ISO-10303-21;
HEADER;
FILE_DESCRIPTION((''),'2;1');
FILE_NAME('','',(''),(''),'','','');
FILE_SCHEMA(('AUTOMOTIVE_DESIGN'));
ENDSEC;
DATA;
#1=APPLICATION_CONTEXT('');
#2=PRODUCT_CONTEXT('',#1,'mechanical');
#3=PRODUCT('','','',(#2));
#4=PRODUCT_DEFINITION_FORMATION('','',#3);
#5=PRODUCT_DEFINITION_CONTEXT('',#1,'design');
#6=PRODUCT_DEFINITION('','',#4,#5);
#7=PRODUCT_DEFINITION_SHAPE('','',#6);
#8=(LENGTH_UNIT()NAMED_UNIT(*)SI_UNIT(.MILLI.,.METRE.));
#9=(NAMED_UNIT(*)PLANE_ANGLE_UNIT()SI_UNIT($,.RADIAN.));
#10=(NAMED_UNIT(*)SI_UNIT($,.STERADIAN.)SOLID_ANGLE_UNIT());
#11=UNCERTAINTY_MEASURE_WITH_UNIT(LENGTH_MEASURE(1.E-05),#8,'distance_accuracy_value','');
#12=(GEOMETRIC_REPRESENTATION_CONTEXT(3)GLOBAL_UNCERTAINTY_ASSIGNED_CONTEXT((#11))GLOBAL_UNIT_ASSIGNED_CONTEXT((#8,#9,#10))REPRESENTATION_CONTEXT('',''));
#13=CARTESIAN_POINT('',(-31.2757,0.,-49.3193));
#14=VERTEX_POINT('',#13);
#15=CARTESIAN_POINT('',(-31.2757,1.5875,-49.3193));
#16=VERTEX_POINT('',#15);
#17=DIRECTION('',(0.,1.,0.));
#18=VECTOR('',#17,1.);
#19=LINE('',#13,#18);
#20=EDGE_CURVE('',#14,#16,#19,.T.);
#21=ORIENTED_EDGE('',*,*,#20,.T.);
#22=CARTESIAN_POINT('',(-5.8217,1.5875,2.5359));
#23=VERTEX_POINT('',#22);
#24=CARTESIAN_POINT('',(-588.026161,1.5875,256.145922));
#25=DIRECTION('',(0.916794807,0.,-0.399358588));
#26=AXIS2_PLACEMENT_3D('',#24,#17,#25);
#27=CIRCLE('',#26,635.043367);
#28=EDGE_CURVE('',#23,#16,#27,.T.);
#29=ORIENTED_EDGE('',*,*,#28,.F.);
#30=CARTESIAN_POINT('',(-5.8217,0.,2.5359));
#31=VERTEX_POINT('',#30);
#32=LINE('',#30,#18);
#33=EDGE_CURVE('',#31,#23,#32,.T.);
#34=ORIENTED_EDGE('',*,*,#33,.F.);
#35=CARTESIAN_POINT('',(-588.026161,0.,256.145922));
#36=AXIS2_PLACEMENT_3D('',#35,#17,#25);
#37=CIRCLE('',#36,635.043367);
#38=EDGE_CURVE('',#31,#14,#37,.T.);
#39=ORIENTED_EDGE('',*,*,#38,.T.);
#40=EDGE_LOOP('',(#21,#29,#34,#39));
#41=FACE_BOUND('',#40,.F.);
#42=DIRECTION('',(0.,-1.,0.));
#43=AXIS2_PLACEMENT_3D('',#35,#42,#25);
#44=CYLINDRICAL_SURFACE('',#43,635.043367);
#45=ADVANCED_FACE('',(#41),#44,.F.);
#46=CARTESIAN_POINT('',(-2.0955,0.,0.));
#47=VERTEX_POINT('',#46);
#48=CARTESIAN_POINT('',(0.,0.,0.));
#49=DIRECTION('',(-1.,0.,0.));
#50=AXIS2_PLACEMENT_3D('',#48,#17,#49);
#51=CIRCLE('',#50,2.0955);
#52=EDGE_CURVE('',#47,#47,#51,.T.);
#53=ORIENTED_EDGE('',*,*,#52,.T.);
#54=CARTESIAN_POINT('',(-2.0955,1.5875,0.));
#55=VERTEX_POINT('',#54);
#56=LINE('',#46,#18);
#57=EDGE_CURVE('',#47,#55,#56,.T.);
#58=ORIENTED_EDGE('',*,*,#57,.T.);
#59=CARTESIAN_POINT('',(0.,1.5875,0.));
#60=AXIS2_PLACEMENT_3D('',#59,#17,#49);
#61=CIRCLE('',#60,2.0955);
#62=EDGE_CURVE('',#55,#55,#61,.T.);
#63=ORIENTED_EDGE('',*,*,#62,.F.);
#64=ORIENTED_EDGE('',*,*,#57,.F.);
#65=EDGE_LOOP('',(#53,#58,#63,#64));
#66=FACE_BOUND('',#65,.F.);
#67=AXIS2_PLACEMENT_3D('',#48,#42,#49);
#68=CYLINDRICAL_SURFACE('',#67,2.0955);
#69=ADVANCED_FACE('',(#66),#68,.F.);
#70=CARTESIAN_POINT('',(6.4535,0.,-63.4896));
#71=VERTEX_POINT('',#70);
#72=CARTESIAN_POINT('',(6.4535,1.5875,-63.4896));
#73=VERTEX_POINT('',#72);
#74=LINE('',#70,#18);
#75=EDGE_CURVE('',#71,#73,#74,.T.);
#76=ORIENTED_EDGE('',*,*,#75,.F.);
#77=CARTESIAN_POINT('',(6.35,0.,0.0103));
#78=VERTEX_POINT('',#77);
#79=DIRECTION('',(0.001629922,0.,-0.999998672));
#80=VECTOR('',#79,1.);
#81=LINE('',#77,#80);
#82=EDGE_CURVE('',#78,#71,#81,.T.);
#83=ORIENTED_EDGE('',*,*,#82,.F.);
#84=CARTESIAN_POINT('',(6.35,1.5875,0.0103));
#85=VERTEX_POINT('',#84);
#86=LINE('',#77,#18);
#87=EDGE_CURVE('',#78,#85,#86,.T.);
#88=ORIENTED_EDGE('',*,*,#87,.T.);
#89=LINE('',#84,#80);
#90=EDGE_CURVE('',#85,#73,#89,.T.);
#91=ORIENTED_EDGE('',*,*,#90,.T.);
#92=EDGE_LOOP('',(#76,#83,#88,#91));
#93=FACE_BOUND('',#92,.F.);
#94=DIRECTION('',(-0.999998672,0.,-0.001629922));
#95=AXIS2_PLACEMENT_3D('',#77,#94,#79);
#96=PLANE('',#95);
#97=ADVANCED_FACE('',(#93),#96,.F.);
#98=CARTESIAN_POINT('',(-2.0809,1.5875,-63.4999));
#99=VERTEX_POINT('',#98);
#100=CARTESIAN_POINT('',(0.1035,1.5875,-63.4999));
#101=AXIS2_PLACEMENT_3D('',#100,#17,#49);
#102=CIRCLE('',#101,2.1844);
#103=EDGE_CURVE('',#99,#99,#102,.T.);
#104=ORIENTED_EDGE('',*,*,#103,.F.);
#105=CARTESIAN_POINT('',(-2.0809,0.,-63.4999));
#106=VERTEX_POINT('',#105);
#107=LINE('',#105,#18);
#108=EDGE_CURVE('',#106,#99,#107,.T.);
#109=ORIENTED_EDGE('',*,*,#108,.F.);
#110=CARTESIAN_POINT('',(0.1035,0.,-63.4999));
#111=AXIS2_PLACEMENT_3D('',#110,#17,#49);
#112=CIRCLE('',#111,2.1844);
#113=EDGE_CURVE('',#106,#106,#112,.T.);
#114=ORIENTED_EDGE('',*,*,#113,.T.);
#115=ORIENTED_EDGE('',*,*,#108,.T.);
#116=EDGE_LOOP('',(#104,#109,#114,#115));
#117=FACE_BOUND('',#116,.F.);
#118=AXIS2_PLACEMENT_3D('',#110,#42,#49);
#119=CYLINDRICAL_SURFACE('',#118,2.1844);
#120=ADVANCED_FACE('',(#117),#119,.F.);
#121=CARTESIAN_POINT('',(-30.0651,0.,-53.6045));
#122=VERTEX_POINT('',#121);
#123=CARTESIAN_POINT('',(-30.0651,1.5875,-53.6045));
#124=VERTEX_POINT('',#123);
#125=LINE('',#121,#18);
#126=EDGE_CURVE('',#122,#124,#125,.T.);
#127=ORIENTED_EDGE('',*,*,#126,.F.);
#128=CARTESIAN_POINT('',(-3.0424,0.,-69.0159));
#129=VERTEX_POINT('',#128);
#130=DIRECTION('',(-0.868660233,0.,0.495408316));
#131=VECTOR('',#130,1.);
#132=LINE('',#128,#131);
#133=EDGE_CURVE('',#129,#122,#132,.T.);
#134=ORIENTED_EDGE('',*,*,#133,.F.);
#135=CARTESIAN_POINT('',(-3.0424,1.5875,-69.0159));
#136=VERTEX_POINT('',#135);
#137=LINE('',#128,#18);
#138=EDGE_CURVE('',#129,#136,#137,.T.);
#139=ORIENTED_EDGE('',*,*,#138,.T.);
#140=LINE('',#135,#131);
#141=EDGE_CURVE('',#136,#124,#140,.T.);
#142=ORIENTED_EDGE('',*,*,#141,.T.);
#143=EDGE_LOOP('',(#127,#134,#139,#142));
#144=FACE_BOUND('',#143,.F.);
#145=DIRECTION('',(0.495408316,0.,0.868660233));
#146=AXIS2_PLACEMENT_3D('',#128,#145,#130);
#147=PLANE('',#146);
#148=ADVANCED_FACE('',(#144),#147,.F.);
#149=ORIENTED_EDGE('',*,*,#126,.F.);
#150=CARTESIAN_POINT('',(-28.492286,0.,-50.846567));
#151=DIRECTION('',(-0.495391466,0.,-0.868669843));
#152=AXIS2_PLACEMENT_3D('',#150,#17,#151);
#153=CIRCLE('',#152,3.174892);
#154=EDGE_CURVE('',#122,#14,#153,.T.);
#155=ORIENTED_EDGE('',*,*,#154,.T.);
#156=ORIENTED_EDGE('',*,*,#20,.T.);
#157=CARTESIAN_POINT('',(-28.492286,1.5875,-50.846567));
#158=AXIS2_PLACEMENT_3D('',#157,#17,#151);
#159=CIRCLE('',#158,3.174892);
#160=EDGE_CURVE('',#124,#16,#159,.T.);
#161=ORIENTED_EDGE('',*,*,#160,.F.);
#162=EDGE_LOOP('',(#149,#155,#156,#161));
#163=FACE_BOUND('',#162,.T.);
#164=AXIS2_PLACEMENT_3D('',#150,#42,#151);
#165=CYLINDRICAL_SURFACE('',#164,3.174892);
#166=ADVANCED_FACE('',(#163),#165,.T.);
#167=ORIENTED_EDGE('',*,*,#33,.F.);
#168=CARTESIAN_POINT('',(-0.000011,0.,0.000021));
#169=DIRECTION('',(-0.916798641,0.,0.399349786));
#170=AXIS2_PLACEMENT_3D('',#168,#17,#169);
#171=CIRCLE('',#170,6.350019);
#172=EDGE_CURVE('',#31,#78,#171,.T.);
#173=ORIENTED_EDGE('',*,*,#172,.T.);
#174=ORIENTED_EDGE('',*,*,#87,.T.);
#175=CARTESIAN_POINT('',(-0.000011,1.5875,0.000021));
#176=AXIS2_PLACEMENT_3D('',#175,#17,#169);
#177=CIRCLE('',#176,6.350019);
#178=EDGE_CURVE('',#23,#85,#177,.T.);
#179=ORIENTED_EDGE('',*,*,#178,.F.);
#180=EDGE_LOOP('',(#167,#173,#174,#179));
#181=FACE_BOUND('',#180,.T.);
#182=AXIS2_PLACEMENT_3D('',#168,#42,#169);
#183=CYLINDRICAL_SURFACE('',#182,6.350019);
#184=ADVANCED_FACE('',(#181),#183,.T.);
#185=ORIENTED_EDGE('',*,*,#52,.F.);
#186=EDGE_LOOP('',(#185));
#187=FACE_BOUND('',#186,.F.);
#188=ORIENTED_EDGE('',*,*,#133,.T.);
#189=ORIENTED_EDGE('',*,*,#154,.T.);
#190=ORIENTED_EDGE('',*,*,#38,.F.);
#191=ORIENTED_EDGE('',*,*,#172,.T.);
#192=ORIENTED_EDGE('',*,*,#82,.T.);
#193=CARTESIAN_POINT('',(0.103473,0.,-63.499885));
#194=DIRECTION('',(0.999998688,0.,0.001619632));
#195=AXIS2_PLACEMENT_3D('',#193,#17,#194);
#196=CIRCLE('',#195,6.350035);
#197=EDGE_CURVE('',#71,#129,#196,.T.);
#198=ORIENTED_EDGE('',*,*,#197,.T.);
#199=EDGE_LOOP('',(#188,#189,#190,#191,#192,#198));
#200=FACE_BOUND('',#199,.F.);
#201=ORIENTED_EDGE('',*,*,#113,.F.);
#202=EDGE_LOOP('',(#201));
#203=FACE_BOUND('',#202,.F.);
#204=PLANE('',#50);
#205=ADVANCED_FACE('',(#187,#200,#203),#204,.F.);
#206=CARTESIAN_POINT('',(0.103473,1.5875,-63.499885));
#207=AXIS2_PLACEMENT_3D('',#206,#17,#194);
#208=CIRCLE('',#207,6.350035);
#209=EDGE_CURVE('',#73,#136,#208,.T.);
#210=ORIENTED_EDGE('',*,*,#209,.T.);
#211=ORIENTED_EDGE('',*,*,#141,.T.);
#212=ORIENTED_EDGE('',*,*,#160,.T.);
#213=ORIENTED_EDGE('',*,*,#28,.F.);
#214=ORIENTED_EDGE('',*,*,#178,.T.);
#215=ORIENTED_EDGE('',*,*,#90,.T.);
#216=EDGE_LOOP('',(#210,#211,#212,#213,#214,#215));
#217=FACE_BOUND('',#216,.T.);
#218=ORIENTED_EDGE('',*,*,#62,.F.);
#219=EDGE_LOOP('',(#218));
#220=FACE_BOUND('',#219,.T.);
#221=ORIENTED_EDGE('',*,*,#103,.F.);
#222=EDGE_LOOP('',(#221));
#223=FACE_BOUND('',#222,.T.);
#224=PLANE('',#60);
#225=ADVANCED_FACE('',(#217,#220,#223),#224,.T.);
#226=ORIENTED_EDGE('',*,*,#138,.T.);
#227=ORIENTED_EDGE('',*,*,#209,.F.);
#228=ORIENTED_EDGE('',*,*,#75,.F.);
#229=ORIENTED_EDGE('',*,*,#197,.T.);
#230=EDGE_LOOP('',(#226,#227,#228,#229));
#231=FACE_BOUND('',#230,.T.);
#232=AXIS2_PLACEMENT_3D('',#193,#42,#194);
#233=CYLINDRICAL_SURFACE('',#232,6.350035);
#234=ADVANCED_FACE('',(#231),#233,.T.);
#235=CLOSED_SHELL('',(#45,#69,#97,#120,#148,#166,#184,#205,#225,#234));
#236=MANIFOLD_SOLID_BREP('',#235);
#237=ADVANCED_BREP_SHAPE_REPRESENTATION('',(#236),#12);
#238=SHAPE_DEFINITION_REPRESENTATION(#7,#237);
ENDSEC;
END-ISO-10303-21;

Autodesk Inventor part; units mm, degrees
ref_plane "YZ Plane" through (0, 0, 0) normal (1, 0, 0) x (0, 1, 0)
ref_plane "XZ Plane" through (0, 0, 0) normal (0, 1, 0) x (-1, 0, 0)
ref_plane "XY Plane" through (0, 0, 0) normal (0, 0, 1) x (1, 0, 0)
sketch "main" plane through (0, 0, 0) normal (0, 0, 1) x (1, 0, 0)
  circle A0 centre (31.4944, -42.9627) radius 2.1844
  arc A1 (31.4944, -49.3127) -> (37.0053, -39.8078) centre (31.4944, -42.9627) ccw
  arc A2 (-34.551, -37.1452) -> (-32.0056, -49.3127) centre (-32.0056, -42.9627) ccw
  arc A3 (-34.551, -37.1452) -> (17.2626, -11.6066) centre (-289.0911, 544.606) ccw
  line L0 (37.0053, -39.8078) -> (21.5498, -12.8103)
  line L1 (-32.0056, -49.3127) -> (31.4944, -49.3127)
  arc A4 (21.5498, -12.8103) -> (17.2626, -11.6066) centre (18.7944, -14.3877) ccw
  circle A5 centre (-32.0056, -42.9627) radius 2.0955
  point P0 (5.1717, -33.3366)
  point P1 (19.9944, -10.0932)
  dimension "d0" = 1270
  dimension "d1" = 12.7
  dimension "d2" = 12.7
  dimension "d3" = 3.175
  dimension "d4" = 4.191
  dimension "d7" = 34.925
  dimension "d8" = 12.7
sketch "Sketch1" plane through (0, 0, 0) normal (0, 1, 0) x (-1, 0, 0)
  circle A0 centre (-0.1035, -63.4999) radius 2.1844
  arc A1 (-6.4535, -63.4896) -> (3.0424, -69.0159) centre (-0.1035, -63.4999) ccw
  arc A2 (5.8217, 2.5359) -> (-6.35, 0.0103) centre (0, 0) ccw
  arc A3 (5.8217, 2.5359) -> (31.2757, -49.3193) centre (587.9868, 256.1277) ccw
  line L0 (3.0424, -69.0159) -> (30.0651, -53.6045)
  line L1 (-6.35, 0.0103) -> (-6.4535, -63.4896)
  arc A4 (30.0651, -53.6045) -> (31.2757, -49.3193) centre (28.4922, -50.8465) ccw
  circle A5 centre (0, 0) radius 2.0955
  point P0 (0, 0)
extrude "Extrusion1" add sketch "Sketch1" along normal blind 1.5875
properties part number "Magazine Gusset" material "Acetal Resin, White"
